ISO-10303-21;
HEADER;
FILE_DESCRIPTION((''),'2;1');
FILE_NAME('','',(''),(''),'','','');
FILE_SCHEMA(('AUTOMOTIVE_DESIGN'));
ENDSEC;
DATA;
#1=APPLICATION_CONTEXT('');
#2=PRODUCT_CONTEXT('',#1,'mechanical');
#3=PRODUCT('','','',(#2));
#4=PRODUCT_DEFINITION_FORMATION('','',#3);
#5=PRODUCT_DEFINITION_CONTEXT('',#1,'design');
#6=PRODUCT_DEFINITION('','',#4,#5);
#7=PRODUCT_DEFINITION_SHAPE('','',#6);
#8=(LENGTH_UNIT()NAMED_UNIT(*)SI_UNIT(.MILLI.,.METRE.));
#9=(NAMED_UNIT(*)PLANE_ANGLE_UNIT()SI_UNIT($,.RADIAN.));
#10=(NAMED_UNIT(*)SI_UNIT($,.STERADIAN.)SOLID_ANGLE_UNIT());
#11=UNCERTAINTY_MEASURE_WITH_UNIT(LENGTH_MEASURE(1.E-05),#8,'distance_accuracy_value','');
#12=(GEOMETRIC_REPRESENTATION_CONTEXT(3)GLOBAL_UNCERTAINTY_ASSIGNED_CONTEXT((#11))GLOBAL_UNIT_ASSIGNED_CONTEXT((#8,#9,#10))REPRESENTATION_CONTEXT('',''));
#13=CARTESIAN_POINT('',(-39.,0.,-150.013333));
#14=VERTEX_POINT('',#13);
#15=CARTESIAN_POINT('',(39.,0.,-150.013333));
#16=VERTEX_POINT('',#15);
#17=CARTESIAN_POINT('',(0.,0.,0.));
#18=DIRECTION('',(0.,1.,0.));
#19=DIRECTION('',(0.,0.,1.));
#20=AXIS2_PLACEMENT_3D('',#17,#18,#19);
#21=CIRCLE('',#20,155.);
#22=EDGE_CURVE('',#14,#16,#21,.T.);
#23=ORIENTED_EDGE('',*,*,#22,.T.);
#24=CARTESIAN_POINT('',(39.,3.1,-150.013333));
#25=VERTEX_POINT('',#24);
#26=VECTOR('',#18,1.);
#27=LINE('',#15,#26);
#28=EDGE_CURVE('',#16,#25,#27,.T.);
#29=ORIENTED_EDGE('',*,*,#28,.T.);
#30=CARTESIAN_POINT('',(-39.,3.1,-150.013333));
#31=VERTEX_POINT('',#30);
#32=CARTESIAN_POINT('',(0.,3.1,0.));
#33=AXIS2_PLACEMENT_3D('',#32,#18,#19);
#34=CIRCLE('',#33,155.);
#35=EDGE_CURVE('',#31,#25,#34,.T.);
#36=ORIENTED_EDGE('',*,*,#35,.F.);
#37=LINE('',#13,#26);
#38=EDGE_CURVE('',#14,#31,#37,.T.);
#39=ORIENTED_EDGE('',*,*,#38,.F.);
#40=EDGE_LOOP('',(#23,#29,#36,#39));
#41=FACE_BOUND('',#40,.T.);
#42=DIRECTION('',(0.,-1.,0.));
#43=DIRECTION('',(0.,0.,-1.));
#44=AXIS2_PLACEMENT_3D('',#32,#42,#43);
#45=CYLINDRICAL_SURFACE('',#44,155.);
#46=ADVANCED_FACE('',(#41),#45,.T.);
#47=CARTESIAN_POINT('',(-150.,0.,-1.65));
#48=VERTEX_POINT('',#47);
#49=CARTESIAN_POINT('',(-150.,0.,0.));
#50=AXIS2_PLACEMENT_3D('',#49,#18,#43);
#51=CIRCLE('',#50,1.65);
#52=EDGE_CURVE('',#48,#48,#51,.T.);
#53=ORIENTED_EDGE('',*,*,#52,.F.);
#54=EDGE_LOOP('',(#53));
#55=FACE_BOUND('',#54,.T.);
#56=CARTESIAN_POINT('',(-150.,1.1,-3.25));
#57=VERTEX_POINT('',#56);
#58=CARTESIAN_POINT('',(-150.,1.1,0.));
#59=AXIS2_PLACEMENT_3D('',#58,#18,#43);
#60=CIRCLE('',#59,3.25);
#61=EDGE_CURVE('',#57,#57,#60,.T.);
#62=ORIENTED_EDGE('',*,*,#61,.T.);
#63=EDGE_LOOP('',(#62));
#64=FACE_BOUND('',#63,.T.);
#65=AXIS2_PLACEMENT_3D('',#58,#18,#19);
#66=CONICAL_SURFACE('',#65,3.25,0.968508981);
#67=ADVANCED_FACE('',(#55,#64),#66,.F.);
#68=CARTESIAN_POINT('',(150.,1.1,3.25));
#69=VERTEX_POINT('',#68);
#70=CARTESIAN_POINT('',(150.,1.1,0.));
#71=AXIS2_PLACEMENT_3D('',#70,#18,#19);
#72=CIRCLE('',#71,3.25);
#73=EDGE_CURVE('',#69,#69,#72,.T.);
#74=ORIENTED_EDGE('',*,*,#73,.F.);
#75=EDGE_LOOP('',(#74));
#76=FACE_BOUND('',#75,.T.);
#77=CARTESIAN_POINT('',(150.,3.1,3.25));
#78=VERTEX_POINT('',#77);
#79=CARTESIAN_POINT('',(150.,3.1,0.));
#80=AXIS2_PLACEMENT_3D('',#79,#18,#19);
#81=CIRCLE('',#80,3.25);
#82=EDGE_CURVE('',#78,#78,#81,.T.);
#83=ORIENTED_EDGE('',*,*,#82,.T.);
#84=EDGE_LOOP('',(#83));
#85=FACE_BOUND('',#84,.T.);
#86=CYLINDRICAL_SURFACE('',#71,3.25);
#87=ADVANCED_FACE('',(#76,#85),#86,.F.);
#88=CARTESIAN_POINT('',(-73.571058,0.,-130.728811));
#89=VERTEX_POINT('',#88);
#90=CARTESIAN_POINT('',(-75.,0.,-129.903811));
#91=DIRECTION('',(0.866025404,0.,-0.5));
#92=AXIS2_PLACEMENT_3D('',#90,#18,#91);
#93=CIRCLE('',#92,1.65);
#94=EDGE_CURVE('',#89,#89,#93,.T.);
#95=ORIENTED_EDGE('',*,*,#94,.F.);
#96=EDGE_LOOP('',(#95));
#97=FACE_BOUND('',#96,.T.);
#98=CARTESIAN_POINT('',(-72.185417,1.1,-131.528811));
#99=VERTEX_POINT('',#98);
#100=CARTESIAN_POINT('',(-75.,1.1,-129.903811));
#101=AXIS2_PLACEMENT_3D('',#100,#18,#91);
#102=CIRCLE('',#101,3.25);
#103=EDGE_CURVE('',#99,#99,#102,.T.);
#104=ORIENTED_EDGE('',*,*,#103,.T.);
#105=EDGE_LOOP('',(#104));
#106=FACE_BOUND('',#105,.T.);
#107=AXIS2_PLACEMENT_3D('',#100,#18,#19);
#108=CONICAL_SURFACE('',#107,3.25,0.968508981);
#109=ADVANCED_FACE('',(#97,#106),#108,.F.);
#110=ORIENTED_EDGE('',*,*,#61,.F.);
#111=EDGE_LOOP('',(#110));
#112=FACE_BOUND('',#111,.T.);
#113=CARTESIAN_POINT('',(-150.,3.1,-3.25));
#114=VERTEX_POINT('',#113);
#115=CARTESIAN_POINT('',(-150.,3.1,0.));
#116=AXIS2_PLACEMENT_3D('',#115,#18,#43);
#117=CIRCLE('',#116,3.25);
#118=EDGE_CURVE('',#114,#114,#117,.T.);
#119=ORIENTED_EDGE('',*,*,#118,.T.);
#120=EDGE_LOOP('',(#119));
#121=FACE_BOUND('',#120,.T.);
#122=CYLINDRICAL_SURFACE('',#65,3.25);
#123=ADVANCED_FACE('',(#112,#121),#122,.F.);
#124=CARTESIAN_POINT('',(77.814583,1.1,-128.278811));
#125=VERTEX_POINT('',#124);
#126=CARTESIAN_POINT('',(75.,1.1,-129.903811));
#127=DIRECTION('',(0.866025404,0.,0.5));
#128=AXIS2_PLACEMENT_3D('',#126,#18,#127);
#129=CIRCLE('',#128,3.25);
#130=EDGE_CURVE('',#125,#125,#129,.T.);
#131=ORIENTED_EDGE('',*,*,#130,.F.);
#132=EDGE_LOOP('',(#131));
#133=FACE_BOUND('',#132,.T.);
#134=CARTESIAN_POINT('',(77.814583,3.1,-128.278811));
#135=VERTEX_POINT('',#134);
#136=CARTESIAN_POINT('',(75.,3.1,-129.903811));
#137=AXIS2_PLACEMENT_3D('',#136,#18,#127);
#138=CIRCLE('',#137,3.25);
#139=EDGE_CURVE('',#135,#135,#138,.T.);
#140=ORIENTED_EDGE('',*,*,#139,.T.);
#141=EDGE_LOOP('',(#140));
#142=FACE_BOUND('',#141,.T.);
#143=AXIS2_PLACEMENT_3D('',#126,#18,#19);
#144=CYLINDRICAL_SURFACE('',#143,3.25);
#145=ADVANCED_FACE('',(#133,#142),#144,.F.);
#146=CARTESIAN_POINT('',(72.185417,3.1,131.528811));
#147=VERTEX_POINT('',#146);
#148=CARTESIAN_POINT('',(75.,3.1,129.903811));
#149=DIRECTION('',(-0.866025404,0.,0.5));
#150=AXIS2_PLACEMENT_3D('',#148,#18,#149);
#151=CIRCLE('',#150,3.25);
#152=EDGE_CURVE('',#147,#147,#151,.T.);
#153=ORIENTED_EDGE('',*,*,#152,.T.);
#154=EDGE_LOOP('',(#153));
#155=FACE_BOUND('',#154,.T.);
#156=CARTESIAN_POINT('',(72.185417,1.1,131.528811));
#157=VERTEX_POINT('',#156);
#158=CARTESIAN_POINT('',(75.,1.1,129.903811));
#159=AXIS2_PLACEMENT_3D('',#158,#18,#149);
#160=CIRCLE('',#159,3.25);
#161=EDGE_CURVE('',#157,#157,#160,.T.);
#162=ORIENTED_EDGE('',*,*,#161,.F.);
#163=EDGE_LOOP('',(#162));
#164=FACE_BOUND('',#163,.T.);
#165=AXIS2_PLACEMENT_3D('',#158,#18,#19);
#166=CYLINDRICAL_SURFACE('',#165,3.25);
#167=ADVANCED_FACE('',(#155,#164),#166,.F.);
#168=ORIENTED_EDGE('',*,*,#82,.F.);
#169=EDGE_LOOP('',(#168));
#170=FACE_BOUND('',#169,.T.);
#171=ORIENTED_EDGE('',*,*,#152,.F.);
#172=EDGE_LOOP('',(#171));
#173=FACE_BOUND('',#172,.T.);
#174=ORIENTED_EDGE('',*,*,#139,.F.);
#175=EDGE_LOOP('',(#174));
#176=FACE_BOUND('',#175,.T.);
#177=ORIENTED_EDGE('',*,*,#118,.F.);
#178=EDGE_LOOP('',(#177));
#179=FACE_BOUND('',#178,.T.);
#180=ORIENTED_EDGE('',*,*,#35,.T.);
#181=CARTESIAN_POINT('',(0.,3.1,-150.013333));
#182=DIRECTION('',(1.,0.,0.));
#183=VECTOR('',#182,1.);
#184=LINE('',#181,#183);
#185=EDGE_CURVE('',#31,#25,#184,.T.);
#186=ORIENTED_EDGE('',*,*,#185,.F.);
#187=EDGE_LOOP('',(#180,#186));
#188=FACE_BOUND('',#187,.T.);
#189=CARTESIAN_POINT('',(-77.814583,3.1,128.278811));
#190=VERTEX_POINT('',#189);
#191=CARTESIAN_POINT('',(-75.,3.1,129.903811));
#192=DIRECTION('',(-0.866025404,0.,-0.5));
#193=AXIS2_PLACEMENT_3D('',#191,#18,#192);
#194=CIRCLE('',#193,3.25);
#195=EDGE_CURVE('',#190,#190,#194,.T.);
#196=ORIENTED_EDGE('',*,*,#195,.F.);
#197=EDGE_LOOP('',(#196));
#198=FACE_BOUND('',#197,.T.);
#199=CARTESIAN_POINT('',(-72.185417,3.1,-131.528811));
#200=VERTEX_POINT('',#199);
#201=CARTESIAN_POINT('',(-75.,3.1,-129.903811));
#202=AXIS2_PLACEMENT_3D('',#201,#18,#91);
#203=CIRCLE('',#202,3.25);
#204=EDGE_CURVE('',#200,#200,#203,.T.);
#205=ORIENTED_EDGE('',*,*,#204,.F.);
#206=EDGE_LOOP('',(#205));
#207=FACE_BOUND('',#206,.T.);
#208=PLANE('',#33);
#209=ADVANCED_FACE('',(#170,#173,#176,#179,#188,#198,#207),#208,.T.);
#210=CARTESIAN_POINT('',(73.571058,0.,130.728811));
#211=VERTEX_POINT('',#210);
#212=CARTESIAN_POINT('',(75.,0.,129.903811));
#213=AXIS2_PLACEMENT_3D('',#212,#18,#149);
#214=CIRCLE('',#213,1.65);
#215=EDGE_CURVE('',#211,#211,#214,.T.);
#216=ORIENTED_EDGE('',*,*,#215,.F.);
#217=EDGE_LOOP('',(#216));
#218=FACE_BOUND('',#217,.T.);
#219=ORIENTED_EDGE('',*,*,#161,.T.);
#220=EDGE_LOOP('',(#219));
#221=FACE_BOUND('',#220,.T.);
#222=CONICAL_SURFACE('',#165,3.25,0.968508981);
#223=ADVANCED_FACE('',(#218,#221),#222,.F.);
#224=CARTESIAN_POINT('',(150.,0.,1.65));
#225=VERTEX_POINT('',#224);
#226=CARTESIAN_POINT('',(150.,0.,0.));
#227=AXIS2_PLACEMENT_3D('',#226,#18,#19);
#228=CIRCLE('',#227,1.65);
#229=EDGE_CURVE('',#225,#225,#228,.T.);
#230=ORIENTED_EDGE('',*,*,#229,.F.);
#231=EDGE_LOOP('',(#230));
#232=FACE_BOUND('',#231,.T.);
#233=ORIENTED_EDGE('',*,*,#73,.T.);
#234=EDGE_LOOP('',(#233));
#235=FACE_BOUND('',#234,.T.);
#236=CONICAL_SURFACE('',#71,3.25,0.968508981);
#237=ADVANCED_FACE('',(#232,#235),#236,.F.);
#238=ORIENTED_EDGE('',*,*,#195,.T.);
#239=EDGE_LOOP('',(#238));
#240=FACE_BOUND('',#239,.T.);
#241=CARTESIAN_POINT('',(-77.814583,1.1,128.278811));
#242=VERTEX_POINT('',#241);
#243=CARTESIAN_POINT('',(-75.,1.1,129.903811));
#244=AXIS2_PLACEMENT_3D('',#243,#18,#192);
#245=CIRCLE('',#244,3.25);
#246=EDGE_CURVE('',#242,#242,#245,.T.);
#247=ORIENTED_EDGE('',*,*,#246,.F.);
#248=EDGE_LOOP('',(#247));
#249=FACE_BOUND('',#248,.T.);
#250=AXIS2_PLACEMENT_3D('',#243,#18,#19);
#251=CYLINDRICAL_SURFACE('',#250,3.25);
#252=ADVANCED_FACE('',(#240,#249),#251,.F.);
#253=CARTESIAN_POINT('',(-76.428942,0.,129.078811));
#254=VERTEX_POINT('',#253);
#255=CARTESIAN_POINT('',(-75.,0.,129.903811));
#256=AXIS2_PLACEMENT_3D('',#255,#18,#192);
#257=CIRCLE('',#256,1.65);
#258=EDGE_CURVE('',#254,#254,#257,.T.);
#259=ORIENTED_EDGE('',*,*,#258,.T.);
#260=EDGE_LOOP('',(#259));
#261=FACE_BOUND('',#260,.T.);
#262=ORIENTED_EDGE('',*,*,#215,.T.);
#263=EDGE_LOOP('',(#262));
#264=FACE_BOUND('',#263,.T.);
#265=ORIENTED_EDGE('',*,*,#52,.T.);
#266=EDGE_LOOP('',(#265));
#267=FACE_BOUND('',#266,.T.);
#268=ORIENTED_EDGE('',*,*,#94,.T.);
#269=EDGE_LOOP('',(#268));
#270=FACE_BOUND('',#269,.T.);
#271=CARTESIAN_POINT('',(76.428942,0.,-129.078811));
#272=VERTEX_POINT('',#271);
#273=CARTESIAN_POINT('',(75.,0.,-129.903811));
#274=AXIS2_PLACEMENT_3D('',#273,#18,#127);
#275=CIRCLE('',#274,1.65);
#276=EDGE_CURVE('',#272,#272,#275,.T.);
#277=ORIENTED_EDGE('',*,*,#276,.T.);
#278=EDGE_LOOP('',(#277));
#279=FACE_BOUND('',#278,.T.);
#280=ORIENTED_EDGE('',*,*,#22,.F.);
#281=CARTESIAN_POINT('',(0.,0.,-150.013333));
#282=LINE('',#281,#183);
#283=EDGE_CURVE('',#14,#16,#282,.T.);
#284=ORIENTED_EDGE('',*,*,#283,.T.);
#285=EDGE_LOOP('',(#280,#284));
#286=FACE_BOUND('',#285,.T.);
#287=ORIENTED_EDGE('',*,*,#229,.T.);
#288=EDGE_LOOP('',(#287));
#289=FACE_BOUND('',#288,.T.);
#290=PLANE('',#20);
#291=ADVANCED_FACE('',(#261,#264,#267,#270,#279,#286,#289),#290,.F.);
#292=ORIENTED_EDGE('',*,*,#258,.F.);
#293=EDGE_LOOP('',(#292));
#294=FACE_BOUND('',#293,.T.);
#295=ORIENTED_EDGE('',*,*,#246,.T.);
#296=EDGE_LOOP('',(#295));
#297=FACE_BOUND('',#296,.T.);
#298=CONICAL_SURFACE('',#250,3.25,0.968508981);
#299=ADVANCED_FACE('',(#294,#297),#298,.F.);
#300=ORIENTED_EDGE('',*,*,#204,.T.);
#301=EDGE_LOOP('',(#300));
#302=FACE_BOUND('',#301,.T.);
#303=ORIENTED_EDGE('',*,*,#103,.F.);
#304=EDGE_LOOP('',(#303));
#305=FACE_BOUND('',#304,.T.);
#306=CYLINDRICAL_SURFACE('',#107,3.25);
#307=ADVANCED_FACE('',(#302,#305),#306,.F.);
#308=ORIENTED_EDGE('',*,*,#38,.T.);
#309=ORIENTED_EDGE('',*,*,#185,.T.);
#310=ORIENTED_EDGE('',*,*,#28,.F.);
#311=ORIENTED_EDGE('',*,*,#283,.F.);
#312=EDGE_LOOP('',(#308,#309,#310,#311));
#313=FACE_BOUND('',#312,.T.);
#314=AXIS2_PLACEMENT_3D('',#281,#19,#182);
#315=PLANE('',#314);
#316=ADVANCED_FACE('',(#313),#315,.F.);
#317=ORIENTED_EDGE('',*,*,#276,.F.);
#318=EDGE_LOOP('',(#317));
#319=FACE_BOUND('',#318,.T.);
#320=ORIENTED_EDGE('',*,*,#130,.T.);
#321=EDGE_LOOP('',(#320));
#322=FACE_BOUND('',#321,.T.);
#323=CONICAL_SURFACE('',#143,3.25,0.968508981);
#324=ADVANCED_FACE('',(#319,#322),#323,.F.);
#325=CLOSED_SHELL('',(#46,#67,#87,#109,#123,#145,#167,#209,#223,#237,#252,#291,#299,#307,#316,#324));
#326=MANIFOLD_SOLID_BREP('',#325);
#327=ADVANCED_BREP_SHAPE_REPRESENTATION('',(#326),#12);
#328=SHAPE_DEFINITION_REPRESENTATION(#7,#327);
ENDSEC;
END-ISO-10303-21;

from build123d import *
from OCP.BRepFilletAPI import BRepFilletAPI_MakeChamfer

# Parameters (mm, degrees)
SKETCH1_R                      = 155
BOSS_EXTRUDE1_DEPTH            = 3.1
SKETCH2_R                      = 1.65
CUT_EXTRUDE1_DEPTH             = 220.225021382
SKETCH3_R                      = 3.25
CUT_EXTRUDE2_DEPTH             = 2
CHAMFER1_SIZE2                 = 1.6
CHAMFER1_SIZE                  = 1.1
CIRPATTERN1_COUNT              = 6
CHAMFER1_OF_CIRPATTERN1_SIZE   = 1.1
CHAMFER1_OF_CIRPATTERN1_SIZE_2 = 1.6
CUT_EXTRUDE3_DEPTH             = 220.225021382


with BuildPart() as part:
    # Sketch1 → Boss-Extrude1 (new body)
    with BuildSketch(Plane(origin=(0, 0, 0), x_dir=(1, 0, 0), z_dir=(0, 1, 0))):
        with Locations(Location((0, 0, 0), (0, 0, 90))):
            Circle(SKETCH1_R)
    extrude(amount=BOSS_EXTRUDE1_DEPTH)

    # Sketch2 → Cut-Extrude1 (cut, through all)
    with BuildSketch(Plane(origin=(0, 3.1, 0), x_dir=(1, 0, 0), z_dir=(0, 1, 0))):
        with Locations(Location((150, 0, 0), (0, 0, 270))):
            Circle(SKETCH2_R)
    cut_extrude1 = extrude(amount=-CUT_EXTRUDE1_DEPTH, mode=Mode.SUBTRACT)

    # Sketch3 → Cut-Extrude2 (cut)
    with BuildSketch(Plane(origin=(0, 3.1, 0), x_dir=(1, 0, 0), z_dir=(0, 1, 0))):
        with Locations(Location((150, 0, 0), (0, 0, 270))):
            Circle(SKETCH3_R)
    cut_extrude2 = extrude(amount=-CUT_EXTRUDE2_DEPTH, mode=Mode.SUBTRACT)

    # Chamfer1
    chamfer1_edges = [part.edges().sort_by_distance(p)[0] for p in [
        (150, 1.1, -1.65),
    ]]
    chamfer1_side = [part.faces().sort_by_distance(p)[0] for p in [
        (150, 1.078, -1.65),
    ]]
    chamfer(chamfer1_edges, length=CHAMFER1_SIZE - 0.0001, length2=CHAMFER1_SIZE2 - 0.0001, reference=chamfer1_side[0])  # a hair under: the kernel refuses the full size

    # CirPattern1: Cut-Extrude1, Cut-Extrude2 ×6 about axis
    cirpattern1_axis = Axis((0, 0, 0), (0, 1, 0))
    add([cut_extrude1.rotate(cirpattern1_axis, i * 360 / CIRPATTERN1_COUNT) for i in range(1, CIRPATTERN1_COUNT)], mode=Mode.SUBTRACT)
    add([cut_extrude2.rotate(cirpattern1_axis, i * 360 / CIRPATTERN1_COUNT) for i in range(1, CIRPATTERN1_COUNT)], mode=Mode.SUBTRACT)

    # Chamfer1 of CirPattern1
    chamfer1_of_cirpattern1_edges_1 = [part.edges().sort_by_distance(p)[0] for p in [
        (73.571058084, 1.1, -130.728810568),
    ]]
    chamfer1_of_cirpattern1_side_1 = [part.faces().sort_by_distance(p)[0] for p in [
        (73.571058084, 1.078, -130.728810568),
    ]]
    chamfer1_of_cirpattern1_edges_2 = [part.edges().sort_by_distance(p)[0] for p in [
        (-76.428941916, 1.1, -129.078810568),
    ]]
    chamfer1_of_cirpattern1_side_2 = [part.faces().sort_by_distance(p)[0] for p in [
        (-76.428941916, 1.078, -129.078810568),
    ]]
    chamfer1_of_cirpattern1_edges_3 = [part.edges().sort_by_distance(p)[0] for p in [
        (-150, 1.1, 1.65),
    ]]
    chamfer1_of_cirpattern1_side_3 = [part.faces().sort_by_distance(p)[0] for p in [
        (-150, 1.078, 1.65),
    ]]
    chamfer1_of_cirpattern1_edges_4 = [part.edges().sort_by_distance(p)[0] for p in [
        (-73.571058084, 1.1, 130.728810568),
    ]]
    chamfer1_of_cirpattern1_side_4 = [part.faces().sort_by_distance(p)[0] for p in [
        (-73.571058084, 1.078, 130.728810568),
    ]]
    chamfer1_of_cirpattern1_edges_5 = [part.edges().sort_by_distance(p)[0] for p in [
        (76.428941916, 1.1, 129.078810568),
    ]]
    chamfer1_of_cirpattern1_side_5 = [part.faces().sort_by_distance(p)[0] for p in [
        (76.428941916, 1.078, 129.078810568),
    ]]
    chamfer1_of_cirpattern1 = BRepFilletAPI_MakeChamfer(part.part.solid().wrapped)
    for e in chamfer1_of_cirpattern1_edges_1:
        chamfer1_of_cirpattern1.Add(CHAMFER1_OF_CIRPATTERN1_SIZE - 0.0001, CHAMFER1_OF_CIRPATTERN1_SIZE_2 - 0.0001, e.wrapped, chamfer1_of_cirpattern1_side_1[0].wrapped)
    for e in chamfer1_of_cirpattern1_edges_2:
        chamfer1_of_cirpattern1.Add(CHAMFER1_OF_CIRPATTERN1_SIZE - 0.0001, CHAMFER1_OF_CIRPATTERN1_SIZE_2 - 0.0001, e.wrapped, chamfer1_of_cirpattern1_side_2[0].wrapped)
    for e in chamfer1_of_cirpattern1_edges_3:
        chamfer1_of_cirpattern1.Add(CHAMFER1_OF_CIRPATTERN1_SIZE - 0.0001, CHAMFER1_OF_CIRPATTERN1_SIZE_2 - 0.0001, e.wrapped, chamfer1_of_cirpattern1_side_3[0].wrapped)
    for e in chamfer1_of_cirpattern1_edges_4:
        chamfer1_of_cirpattern1.Add(CHAMFER1_OF_CIRPATTERN1_SIZE - 0.0001, CHAMFER1_OF_CIRPATTERN1_SIZE_2 - 0.0001, e.wrapped, chamfer1_of_cirpattern1_side_4[0].wrapped)
    for e in chamfer1_of_cirpattern1_edges_5:
        chamfer1_of_cirpattern1.Add(CHAMFER1_OF_CIRPATTERN1_SIZE - 0.0001, CHAMFER1_OF_CIRPATTERN1_SIZE_2 - 0.0001, e.wrapped, chamfer1_of_cirpattern1_side_5[0].wrapped)
    add(Compound.cast(chamfer1_of_cirpattern1.Shape()), mode=Mode.REPLACE)  # a hair under: the kernel refuses the full size

    # Sketch4 → Cut-Extrude3 (cut, through all)
    with BuildSketch(Plane(origin=(0, 3.1, 0), x_dir=(1, 0, 0), z_dir=(0, 1, 0))):
        with BuildLine():
            Line((0, 150.013332741), (39, 150.013332741))
            ThreePointArc((39, 150.013332741), (0, 155), (-39, 150.013332741))
            Line((-39, 150.013332741), (0, 150.013332741))
        make_face()
    extrude(amount=-CUT_EXTRUDE3_DEPTH, mode=Mode.SUBTRACT)


solid = part.part
